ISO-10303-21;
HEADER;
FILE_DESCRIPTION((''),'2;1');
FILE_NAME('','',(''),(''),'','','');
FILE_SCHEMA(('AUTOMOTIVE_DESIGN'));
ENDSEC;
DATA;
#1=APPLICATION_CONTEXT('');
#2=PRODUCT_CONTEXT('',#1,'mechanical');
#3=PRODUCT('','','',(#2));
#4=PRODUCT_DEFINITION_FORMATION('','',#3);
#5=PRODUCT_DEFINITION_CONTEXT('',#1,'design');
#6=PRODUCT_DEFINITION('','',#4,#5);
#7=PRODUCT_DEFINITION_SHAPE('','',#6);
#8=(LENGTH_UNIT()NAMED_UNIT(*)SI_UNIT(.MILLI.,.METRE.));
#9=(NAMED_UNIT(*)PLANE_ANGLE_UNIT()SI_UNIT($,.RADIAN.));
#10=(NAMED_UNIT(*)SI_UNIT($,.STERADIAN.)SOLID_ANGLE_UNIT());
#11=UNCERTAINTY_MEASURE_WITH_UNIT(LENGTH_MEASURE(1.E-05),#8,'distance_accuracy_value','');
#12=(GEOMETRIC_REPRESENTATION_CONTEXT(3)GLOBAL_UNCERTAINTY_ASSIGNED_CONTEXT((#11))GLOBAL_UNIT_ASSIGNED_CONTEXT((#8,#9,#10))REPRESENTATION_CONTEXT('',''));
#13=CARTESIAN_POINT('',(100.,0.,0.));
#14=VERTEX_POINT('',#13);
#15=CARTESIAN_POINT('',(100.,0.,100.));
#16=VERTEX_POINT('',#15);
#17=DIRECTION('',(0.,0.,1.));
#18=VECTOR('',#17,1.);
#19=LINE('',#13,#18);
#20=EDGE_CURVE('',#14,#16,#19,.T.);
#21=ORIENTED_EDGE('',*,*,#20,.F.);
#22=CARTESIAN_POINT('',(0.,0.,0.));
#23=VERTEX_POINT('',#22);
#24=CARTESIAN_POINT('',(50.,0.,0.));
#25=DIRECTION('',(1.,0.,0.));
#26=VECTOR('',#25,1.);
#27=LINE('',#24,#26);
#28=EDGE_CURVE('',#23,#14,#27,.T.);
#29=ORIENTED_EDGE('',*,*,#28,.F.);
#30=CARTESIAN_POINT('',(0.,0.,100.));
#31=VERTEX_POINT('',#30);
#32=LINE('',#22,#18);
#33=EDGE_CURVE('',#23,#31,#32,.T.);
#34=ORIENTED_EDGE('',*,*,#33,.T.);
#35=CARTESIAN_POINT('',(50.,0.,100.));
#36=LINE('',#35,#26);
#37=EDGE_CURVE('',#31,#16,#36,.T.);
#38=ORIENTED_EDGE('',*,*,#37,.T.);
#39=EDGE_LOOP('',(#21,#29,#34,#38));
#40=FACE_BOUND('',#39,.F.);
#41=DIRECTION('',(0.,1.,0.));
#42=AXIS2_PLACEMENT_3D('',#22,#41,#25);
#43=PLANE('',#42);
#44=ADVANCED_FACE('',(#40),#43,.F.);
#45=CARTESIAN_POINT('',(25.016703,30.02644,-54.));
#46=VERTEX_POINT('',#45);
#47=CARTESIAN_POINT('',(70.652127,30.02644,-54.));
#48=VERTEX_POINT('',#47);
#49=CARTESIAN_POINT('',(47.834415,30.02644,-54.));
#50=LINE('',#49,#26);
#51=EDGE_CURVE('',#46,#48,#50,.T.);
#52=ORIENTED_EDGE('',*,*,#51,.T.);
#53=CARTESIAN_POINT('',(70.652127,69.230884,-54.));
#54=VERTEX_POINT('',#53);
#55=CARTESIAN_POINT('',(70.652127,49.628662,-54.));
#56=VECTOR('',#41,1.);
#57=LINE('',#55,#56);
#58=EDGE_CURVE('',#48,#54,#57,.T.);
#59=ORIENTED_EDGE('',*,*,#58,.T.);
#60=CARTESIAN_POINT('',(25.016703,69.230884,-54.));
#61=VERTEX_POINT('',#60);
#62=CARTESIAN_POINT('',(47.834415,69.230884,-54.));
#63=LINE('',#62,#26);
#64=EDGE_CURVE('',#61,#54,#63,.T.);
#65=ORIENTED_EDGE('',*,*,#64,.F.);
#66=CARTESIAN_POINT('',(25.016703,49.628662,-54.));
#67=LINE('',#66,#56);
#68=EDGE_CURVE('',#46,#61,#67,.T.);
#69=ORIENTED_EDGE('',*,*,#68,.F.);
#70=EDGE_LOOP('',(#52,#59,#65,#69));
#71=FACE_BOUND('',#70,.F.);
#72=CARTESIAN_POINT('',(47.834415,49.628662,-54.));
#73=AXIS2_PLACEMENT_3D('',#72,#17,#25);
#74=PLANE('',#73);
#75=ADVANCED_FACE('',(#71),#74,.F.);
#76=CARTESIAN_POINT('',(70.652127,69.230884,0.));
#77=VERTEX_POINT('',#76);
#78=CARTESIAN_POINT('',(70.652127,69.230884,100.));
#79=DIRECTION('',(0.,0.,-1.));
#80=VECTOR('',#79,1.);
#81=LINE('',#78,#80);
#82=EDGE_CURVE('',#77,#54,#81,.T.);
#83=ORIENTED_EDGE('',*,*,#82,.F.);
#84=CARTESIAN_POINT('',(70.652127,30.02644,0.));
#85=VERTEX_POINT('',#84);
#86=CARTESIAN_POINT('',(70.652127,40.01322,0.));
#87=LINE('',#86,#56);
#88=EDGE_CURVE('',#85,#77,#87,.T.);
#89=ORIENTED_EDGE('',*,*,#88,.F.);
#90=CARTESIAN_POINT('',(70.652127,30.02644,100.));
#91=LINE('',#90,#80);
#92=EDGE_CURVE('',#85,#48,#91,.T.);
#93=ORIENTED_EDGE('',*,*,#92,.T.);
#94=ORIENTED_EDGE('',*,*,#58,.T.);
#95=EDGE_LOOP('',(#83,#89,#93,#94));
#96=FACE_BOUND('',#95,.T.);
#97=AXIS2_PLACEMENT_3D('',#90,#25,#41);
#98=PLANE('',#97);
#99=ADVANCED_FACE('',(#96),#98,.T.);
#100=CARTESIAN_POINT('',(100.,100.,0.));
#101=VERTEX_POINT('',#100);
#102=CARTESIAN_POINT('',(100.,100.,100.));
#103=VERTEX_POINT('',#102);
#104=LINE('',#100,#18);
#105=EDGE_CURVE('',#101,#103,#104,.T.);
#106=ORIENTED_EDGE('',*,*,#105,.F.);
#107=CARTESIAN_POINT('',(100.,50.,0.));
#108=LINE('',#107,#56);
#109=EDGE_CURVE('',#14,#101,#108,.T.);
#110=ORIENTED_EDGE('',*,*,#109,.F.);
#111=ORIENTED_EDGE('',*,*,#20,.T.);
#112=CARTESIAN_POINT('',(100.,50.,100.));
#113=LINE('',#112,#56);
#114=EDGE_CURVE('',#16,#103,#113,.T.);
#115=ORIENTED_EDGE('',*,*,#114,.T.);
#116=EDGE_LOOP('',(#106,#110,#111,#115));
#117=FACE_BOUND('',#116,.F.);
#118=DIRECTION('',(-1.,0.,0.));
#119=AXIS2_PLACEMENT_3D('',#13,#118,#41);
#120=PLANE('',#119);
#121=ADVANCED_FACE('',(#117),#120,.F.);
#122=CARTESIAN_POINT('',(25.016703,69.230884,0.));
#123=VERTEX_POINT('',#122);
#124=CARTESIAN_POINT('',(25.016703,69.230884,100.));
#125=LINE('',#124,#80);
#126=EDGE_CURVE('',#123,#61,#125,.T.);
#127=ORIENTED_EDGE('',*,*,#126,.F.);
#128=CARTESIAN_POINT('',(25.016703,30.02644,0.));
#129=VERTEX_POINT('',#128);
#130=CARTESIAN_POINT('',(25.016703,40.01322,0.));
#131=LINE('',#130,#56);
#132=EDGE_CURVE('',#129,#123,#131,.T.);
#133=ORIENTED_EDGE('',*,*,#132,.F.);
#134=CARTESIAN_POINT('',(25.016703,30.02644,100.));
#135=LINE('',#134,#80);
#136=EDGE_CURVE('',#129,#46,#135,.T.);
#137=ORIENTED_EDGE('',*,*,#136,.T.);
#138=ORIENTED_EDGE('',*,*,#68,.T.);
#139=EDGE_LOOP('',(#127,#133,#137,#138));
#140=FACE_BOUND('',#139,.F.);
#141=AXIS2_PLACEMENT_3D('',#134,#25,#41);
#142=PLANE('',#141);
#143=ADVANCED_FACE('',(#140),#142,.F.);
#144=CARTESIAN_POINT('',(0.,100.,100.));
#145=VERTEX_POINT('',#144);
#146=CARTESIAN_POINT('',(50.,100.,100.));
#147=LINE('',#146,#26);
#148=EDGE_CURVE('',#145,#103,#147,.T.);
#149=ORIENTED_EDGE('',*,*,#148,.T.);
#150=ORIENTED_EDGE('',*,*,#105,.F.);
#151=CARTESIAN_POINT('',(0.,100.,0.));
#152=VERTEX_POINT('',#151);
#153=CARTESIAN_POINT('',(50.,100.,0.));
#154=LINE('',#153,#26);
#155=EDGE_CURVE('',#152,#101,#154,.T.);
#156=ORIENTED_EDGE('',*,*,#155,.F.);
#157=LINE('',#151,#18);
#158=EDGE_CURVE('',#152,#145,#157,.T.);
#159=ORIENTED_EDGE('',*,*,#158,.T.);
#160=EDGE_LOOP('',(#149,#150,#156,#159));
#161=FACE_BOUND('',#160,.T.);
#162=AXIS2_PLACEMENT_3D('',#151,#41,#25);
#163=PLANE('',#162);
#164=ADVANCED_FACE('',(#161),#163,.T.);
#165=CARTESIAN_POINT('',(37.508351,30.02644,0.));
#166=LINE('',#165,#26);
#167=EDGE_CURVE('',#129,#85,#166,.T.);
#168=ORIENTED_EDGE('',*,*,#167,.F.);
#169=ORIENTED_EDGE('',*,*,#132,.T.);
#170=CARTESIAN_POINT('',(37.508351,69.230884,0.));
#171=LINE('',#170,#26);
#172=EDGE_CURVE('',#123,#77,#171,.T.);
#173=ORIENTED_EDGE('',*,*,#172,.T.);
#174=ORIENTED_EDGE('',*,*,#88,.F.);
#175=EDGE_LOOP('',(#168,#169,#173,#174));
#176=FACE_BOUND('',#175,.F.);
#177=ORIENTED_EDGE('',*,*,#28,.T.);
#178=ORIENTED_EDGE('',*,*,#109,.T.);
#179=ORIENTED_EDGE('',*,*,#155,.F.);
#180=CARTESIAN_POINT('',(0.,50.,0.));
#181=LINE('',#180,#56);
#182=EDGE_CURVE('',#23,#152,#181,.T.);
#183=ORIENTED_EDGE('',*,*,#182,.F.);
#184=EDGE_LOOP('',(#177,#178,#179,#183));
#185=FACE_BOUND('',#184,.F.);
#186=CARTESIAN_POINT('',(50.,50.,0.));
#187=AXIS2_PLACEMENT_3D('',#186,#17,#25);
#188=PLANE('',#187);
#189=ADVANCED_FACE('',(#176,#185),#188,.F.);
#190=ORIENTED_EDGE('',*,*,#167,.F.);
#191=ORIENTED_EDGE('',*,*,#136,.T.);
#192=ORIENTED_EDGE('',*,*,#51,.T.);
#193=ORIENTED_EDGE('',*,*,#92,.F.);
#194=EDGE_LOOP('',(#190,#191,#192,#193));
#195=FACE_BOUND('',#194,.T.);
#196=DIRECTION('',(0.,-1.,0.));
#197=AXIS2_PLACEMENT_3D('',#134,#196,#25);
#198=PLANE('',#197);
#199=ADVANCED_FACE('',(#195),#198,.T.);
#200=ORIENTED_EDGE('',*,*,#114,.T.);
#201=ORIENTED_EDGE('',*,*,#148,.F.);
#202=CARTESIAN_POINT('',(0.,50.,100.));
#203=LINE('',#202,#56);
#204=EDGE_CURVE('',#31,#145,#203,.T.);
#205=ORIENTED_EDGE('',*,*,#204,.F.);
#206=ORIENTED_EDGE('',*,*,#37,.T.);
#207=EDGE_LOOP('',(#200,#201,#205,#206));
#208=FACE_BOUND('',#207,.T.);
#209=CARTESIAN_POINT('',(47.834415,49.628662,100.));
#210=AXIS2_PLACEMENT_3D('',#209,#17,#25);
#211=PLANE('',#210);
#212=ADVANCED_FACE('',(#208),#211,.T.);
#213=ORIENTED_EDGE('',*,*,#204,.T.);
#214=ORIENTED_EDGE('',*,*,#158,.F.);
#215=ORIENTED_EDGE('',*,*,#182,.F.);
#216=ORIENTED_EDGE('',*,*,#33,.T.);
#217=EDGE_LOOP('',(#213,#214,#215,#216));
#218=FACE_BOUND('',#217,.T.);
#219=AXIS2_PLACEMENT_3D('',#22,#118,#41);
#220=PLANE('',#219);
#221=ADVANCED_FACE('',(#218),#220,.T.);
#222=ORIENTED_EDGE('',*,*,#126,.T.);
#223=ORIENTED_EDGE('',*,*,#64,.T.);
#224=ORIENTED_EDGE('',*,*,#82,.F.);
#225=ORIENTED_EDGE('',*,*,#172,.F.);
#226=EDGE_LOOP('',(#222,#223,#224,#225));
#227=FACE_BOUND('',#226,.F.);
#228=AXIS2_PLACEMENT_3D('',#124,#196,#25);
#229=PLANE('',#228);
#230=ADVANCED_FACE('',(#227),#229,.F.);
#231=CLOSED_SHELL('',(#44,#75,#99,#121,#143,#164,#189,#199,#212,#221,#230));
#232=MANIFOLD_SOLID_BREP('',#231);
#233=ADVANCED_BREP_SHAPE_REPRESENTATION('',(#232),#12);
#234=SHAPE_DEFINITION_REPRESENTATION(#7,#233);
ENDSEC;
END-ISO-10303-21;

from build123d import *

# Parameters (mm, degrees)
F0_W     = 100
F0_H     = 100
F1_DEPTH = 100
F2_W     = 45.6354245543
F2_H     = 39.2044447362
F3_DEPTH = 154


# Not quite as in the source:
# - a feature names something its author has since deleted; it is built from what else it names


with BuildPart() as f1:
    # F0 (on Top) → F1 (new body)
    with BuildSketch(Plane.XY):
        with Locations((50, 50)):
            Rectangle(F0_W, F0_H)
    extrude(amount=F1_DEPTH)

    # F2 (on face) → F3 (join)
    with BuildSketch(Plane.XY.offset(100)):
        with Locations((47.8344149888, 49.6286619455)):
            Rectangle(F2_W, F2_H)
    extrude(amount=-F3_DEPTH)


solid = f1.part
